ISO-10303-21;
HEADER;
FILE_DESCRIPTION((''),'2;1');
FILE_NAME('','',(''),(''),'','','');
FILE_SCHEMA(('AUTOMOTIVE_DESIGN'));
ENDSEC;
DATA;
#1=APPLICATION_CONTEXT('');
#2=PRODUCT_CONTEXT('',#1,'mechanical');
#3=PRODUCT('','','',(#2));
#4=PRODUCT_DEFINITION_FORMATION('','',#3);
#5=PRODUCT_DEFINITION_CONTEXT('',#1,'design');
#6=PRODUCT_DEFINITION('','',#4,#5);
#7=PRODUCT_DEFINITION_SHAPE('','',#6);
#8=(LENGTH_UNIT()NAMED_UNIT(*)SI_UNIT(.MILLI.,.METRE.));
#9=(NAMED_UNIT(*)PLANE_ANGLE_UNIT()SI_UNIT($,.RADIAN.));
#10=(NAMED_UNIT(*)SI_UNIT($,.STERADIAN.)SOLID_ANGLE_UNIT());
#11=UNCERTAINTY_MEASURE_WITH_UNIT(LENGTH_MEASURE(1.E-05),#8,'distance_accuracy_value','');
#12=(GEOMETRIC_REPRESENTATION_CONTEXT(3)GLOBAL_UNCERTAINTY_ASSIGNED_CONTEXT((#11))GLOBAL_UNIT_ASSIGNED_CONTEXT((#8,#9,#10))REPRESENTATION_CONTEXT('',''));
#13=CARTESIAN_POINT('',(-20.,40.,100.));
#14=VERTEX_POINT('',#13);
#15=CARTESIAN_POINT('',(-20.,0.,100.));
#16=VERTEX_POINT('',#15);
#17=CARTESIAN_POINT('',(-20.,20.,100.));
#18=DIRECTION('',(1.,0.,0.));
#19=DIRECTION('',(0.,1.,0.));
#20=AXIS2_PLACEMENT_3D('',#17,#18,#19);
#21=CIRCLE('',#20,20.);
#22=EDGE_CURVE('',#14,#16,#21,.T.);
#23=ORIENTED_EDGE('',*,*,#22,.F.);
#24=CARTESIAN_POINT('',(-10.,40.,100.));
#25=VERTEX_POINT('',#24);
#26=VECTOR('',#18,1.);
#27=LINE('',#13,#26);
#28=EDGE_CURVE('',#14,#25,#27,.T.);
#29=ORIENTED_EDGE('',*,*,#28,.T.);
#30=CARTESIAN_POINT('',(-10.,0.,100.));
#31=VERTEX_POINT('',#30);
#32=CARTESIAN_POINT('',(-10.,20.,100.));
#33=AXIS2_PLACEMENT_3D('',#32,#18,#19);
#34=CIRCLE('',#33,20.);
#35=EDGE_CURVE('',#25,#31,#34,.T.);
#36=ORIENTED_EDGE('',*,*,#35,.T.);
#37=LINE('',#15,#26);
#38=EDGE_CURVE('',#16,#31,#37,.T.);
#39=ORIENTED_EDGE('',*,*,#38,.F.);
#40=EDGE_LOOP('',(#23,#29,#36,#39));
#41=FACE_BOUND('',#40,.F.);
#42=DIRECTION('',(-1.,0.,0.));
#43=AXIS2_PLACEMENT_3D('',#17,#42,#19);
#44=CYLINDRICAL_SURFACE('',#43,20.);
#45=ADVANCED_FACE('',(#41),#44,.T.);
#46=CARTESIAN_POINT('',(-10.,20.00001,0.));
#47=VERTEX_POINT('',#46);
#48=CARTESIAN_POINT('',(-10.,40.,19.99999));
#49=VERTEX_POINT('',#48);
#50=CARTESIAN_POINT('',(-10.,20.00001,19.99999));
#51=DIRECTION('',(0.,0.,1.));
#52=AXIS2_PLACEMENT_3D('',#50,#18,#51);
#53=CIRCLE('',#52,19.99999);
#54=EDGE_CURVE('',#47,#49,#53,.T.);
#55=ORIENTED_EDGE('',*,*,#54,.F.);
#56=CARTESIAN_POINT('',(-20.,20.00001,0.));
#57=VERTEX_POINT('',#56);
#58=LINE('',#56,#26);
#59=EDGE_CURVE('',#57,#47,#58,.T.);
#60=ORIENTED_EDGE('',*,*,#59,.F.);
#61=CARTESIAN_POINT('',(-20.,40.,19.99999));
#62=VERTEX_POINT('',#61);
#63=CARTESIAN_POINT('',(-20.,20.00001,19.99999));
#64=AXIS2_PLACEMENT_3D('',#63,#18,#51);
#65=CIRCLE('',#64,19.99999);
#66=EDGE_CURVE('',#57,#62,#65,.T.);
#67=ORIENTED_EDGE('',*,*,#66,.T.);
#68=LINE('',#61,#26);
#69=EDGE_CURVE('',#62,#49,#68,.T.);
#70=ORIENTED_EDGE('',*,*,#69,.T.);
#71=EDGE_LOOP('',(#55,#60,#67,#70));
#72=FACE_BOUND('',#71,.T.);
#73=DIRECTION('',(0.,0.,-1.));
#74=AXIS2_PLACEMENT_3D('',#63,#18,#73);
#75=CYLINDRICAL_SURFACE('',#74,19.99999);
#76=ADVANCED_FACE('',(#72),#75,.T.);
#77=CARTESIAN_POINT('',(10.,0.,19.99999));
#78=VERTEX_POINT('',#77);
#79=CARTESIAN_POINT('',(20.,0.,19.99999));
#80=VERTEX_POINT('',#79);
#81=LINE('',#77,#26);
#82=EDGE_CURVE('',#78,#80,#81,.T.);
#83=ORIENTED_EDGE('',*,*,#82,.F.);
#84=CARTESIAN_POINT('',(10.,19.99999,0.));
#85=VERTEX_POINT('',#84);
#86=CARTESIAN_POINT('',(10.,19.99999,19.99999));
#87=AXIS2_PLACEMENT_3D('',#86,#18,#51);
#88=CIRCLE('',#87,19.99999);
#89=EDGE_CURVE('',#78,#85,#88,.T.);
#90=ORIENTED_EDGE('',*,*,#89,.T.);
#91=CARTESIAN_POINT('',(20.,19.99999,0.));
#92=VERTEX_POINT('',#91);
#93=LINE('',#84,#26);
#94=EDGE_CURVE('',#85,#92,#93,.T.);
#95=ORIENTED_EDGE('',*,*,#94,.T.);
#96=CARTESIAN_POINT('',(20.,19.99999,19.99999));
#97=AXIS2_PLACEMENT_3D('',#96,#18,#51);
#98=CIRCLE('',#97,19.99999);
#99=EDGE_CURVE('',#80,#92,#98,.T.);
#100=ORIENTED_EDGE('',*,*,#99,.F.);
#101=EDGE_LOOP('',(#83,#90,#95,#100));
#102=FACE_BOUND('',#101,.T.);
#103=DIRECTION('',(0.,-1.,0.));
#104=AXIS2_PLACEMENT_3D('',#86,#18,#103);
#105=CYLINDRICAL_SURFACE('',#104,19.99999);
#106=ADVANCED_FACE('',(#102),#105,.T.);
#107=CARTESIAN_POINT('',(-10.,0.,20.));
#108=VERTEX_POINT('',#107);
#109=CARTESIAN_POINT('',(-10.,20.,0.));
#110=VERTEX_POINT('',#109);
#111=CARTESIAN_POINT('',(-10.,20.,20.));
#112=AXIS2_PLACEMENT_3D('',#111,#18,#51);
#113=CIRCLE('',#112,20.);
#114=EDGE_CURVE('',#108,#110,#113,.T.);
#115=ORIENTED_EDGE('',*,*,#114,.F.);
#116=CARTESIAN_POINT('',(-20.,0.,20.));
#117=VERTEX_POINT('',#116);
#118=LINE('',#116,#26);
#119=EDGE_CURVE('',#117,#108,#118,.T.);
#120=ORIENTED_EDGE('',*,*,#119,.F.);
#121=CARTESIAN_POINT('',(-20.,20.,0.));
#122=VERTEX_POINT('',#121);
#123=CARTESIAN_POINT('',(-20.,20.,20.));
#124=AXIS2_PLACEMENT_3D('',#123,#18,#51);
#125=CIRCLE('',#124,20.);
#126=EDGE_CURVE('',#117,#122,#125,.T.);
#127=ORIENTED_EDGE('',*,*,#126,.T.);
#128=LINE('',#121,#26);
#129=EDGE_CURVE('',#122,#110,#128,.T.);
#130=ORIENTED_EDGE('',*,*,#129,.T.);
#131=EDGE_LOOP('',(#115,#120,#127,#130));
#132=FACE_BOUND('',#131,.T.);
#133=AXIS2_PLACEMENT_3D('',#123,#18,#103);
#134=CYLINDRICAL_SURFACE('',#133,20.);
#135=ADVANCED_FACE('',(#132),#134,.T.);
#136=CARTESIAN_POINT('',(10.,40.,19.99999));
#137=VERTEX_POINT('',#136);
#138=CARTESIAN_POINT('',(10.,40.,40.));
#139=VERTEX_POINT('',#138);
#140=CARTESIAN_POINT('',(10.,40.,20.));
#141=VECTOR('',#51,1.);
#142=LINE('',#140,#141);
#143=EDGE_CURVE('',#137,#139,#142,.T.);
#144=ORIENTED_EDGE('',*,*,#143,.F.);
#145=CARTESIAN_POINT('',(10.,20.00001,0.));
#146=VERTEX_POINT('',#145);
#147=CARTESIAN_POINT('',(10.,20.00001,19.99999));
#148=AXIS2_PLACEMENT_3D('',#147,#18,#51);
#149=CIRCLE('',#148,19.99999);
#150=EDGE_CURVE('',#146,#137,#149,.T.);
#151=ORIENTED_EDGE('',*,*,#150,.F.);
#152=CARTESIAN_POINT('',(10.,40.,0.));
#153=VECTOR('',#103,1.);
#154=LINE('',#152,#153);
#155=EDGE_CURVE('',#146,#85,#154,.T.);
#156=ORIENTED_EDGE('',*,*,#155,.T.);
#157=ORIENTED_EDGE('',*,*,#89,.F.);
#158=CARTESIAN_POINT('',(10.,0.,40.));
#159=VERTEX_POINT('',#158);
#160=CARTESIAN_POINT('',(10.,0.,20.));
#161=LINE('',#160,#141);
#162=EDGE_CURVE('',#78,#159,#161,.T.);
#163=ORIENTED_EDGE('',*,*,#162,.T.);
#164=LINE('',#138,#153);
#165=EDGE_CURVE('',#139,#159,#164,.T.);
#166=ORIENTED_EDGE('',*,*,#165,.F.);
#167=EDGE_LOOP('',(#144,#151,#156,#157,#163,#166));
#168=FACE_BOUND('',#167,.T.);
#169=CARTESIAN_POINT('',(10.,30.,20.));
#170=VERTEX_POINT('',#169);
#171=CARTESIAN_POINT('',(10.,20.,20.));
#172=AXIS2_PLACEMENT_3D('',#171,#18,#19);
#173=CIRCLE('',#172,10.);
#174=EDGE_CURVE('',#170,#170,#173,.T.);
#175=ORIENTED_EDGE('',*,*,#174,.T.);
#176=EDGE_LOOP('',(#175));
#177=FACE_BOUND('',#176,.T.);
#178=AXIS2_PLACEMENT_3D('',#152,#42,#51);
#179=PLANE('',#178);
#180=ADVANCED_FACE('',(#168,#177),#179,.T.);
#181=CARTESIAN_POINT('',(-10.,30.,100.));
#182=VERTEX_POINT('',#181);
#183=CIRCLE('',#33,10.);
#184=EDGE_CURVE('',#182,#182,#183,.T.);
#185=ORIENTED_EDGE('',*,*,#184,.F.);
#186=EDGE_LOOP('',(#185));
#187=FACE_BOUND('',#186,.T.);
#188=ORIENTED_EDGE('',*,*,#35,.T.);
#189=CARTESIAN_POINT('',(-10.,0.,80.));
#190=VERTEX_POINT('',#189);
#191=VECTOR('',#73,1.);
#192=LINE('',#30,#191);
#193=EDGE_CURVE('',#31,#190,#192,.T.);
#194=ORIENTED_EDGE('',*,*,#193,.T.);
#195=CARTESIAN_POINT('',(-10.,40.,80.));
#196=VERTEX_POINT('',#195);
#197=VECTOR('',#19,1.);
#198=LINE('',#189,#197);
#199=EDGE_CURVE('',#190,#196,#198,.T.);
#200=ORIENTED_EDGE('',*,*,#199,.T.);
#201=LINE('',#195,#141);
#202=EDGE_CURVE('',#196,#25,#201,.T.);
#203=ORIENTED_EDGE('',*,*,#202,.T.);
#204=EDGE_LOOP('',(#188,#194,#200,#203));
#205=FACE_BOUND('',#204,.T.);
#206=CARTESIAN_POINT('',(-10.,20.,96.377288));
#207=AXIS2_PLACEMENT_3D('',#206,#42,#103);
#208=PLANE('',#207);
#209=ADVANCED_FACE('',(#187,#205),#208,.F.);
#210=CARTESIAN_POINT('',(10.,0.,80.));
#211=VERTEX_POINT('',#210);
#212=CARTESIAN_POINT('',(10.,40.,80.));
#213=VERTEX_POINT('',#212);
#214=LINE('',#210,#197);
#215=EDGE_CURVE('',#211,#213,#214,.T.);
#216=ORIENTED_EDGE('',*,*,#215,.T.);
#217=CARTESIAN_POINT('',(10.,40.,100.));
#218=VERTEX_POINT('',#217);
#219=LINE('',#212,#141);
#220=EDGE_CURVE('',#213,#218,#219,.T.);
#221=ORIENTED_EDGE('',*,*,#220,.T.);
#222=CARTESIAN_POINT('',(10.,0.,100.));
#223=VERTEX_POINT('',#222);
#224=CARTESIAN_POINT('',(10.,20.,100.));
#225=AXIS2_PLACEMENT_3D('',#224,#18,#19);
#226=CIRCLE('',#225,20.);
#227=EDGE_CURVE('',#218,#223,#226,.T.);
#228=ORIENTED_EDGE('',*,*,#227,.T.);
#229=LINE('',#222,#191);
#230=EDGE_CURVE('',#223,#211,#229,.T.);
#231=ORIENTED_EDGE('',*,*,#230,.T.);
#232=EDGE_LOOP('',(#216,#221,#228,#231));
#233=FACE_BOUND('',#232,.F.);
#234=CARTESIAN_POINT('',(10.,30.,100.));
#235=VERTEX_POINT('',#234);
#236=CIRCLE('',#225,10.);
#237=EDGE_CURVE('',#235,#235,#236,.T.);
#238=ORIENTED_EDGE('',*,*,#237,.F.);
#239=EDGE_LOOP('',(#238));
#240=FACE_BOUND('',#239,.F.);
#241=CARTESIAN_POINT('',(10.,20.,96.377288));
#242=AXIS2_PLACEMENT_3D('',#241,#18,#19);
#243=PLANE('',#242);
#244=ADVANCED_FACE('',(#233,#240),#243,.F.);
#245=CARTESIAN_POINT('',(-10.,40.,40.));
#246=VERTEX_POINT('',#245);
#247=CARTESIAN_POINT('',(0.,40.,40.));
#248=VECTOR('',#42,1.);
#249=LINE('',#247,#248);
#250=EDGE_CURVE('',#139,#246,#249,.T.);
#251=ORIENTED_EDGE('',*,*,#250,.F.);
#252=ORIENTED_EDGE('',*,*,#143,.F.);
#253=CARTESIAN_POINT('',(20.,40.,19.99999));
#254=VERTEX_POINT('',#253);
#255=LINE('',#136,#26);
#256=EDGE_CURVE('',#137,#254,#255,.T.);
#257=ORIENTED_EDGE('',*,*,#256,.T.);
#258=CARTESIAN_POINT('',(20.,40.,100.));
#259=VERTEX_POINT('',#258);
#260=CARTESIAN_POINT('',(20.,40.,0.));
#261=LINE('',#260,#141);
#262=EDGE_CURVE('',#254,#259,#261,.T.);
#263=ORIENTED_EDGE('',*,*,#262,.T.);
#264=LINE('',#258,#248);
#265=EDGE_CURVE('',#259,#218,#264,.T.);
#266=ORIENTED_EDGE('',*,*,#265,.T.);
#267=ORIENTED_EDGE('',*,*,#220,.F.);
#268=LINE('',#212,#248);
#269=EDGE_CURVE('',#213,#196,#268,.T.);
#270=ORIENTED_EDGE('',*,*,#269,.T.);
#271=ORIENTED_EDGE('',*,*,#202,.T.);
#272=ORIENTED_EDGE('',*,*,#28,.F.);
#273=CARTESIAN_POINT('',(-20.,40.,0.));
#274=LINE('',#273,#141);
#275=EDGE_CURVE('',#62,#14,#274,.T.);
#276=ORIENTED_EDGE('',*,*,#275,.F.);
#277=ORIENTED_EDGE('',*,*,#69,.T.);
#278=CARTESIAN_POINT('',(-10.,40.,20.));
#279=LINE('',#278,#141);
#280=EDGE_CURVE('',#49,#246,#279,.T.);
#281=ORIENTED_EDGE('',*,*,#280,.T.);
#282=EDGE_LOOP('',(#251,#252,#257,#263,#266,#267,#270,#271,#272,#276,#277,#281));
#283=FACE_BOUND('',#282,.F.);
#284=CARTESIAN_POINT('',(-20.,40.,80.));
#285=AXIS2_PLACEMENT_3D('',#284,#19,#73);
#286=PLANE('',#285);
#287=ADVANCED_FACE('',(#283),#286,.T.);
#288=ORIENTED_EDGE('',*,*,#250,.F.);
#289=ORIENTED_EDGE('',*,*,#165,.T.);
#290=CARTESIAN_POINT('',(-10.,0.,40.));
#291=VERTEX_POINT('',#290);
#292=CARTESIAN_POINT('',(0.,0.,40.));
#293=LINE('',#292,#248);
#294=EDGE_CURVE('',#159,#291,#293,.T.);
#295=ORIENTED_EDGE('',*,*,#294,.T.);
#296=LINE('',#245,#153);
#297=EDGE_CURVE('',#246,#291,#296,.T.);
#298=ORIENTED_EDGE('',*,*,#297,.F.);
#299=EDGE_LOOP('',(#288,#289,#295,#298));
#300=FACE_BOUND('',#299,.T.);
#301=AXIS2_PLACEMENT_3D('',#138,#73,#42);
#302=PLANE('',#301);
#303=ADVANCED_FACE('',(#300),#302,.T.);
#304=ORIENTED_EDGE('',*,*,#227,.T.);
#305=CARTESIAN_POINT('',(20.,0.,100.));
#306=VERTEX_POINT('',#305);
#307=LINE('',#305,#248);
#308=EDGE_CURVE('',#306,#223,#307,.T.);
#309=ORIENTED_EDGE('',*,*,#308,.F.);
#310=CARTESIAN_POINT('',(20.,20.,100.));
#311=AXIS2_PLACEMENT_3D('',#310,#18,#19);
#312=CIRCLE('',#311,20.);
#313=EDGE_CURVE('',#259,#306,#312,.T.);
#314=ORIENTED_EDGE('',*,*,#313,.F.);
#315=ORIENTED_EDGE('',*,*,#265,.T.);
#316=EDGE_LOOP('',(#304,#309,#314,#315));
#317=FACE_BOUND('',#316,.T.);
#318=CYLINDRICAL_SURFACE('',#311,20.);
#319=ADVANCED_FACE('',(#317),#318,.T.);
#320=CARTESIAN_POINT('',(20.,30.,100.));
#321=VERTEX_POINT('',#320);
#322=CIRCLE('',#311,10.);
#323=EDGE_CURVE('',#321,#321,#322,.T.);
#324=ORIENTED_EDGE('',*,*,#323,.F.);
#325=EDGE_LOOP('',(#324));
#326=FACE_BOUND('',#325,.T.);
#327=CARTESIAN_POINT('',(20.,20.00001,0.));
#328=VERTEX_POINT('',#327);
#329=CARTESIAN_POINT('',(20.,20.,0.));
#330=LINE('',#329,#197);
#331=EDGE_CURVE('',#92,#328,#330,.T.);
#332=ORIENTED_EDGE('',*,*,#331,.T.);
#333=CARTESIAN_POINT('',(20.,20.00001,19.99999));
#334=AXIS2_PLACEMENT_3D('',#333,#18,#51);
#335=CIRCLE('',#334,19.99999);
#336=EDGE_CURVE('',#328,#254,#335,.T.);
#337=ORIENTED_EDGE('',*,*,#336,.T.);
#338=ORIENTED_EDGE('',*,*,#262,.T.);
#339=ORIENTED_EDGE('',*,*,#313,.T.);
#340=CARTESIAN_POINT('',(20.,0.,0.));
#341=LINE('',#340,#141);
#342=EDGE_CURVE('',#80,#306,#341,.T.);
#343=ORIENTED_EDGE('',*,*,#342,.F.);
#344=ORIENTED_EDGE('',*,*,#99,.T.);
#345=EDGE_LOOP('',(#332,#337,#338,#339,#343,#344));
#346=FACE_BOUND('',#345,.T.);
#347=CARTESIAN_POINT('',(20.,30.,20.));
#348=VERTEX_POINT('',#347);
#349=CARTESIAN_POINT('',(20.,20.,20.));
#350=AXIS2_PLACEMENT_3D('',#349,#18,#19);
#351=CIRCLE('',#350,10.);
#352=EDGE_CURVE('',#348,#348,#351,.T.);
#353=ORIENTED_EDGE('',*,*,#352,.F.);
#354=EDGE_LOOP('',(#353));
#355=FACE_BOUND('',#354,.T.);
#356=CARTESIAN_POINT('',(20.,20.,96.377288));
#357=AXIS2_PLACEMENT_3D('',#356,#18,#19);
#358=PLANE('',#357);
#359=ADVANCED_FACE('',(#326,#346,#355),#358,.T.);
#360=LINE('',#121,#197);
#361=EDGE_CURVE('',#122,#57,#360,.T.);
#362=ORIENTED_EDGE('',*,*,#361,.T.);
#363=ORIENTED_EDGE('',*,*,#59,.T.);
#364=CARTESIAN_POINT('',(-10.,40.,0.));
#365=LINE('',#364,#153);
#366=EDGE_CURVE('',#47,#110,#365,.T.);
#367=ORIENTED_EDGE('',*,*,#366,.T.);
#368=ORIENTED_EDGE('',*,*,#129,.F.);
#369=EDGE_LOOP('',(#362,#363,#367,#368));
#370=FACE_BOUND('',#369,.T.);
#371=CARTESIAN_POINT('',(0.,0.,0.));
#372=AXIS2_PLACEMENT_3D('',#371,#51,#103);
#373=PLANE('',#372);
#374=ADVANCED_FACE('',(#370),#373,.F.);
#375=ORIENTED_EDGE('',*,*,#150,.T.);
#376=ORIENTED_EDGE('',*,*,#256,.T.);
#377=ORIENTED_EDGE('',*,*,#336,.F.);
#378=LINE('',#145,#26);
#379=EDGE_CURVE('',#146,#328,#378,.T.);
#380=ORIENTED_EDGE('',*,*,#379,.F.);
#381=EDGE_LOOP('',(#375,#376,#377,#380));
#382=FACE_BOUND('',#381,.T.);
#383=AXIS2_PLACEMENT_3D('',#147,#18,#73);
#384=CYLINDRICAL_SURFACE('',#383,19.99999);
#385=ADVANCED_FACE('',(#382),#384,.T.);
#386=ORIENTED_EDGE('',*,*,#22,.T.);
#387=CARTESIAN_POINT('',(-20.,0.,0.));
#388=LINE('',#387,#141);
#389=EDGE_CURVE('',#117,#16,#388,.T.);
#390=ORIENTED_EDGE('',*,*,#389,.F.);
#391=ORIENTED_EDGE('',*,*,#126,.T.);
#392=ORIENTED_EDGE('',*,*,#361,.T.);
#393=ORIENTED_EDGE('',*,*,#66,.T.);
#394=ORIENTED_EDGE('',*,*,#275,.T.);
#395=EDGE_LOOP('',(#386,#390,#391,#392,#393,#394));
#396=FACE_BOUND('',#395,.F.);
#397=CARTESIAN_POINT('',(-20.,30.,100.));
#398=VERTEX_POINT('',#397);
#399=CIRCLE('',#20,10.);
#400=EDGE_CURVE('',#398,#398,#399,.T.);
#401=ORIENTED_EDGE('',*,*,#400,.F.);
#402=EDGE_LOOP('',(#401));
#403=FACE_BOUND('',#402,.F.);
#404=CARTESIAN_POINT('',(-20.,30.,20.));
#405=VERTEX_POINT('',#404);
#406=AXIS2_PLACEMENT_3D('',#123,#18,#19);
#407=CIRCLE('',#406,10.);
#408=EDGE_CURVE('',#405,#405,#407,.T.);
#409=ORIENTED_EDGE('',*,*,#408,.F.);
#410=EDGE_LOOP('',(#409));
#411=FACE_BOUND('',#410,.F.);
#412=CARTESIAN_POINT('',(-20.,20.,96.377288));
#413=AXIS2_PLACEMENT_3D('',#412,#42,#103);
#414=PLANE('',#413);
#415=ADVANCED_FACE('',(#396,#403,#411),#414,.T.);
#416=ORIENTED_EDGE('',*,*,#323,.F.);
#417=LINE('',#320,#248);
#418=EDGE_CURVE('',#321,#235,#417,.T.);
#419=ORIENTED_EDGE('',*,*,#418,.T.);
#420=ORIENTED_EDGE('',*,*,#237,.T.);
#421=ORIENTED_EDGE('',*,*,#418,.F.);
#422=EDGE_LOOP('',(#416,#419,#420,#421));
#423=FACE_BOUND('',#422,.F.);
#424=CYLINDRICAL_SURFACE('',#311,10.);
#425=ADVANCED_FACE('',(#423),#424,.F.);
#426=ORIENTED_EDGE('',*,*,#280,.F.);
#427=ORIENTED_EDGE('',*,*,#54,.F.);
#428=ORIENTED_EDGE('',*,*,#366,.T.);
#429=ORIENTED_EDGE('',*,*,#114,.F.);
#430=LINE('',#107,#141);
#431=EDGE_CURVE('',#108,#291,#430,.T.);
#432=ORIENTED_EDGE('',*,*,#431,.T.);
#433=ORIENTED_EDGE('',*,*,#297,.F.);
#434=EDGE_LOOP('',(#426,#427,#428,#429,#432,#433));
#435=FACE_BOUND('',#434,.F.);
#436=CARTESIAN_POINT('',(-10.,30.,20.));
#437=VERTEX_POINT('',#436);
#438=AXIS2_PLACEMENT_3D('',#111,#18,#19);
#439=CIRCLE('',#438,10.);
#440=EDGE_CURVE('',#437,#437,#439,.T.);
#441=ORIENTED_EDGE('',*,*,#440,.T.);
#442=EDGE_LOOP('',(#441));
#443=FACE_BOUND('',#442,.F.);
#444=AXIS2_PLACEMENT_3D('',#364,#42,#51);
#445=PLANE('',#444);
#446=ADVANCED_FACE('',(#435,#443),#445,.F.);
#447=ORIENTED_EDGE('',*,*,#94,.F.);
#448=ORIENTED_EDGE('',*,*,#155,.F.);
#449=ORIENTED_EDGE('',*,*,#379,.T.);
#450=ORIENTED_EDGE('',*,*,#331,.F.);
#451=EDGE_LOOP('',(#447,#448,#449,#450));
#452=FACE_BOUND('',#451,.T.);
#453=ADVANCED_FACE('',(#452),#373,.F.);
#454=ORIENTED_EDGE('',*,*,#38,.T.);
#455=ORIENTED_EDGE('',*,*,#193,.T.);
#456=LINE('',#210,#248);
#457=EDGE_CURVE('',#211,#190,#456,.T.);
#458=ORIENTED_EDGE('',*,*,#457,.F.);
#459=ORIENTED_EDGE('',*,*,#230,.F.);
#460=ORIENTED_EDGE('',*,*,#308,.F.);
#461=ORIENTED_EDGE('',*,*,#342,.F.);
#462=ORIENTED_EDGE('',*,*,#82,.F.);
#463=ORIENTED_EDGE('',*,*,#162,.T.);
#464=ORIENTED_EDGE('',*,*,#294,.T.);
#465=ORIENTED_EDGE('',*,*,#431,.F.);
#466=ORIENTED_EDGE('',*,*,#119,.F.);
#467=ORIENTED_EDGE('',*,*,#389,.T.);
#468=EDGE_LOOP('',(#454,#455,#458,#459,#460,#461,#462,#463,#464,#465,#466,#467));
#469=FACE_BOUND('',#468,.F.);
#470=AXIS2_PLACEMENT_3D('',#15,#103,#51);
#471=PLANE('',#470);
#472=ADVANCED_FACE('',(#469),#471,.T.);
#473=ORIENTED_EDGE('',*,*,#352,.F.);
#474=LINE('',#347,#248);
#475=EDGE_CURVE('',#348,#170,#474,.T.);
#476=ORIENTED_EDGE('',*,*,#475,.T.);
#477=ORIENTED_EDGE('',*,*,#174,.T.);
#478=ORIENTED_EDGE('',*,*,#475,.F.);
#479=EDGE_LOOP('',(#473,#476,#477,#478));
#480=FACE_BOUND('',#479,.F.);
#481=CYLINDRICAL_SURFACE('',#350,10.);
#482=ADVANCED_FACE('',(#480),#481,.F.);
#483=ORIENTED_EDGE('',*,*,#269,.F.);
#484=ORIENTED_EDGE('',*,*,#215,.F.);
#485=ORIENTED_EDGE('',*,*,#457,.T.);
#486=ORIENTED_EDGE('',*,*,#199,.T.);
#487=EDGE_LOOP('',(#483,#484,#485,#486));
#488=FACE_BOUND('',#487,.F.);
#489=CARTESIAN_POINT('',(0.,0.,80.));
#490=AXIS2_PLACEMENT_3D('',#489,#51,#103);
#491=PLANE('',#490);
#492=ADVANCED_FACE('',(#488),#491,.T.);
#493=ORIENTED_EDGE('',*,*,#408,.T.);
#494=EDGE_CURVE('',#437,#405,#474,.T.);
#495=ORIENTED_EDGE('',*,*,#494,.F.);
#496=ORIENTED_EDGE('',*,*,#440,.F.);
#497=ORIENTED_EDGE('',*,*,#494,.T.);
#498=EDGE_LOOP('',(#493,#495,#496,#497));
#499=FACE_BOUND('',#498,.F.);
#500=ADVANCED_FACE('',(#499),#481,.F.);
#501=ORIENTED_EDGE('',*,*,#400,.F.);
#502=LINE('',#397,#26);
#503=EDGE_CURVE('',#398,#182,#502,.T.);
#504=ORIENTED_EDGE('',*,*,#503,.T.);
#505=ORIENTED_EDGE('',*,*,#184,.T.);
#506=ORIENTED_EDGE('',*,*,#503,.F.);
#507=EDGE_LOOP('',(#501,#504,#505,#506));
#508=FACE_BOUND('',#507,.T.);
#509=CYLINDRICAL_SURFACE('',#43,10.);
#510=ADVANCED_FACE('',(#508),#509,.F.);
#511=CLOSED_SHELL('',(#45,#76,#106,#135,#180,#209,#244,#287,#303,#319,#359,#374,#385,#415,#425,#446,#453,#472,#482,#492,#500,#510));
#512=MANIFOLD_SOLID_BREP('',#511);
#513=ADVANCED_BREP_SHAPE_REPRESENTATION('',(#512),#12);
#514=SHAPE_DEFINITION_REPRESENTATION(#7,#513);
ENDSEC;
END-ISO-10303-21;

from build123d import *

# Parameters (mm, degrees)
F0_W     = 40
F0_H     = 80
F1_DEPTH = 20
F2_R     = 10
F3_DEPTH = 10
F5_W     = 20
F5_H     = 40
F6_DEPTH = 40
F7_R     = 10
F8_DEPTH = 40
F9_R     = 20
F10_R    = 19.99999


# Not quite as in the source:
# - a fillet or chamfer is up to 0.001 mm smaller than in the source, because OpenCascade refuses the exact size


with BuildPart() as f1:
    # F0 (on Right) → F1 (new body)
    with BuildSketch(Plane.YZ):
        with Locations((20, 40)):
            Rectangle(F0_W, F0_H)
    extrude(amount=F1_DEPTH)

    # F2 (on face) → F3 (join)
    with BuildSketch(Plane.YZ.offset(20)):
        with BuildLine():
            Line((0, 100), (0, 80))
            Line((0, 80), (40, 80))
            Line((40, 80), (40, 100))
            ThreePointArc((40, 100), (20, 120), (0, 100))
        make_face()
        with Locations((20, 100)):
            Circle(F2_R, mode=Mode.SUBTRACT)
    extrude(amount=-F3_DEPTH)

    # F4: F1 across face


with BuildPart() as f1_1:
    add(f1.part)
    add(f1.part.mirror(Plane(origin=(0, 20, 40), x_dir=(0, 1, 0), z_dir=(-1, 0, 0))))

    # F5 (on face) → F6 (cut, through all)
    with BuildSketch(Plane(origin=(0, 40, 0), x_dir=(-1, 0, 0), z_dir=(0, 1, 0))):
        with Locations((0, 20)):
            Rectangle(F5_W, F5_H)
    extrude(amount=-F6_DEPTH, mode=Mode.SUBTRACT)

    # F7 (on face) → F8 (cut, through all)
    with BuildSketch(Plane.YZ.offset(20)):
        with Locations((20, 20)):
            Circle(F7_R)
    extrude(amount=-F8_DEPTH, mode=Mode.SUBTRACT)

    # F9
    f9_edges = [f1_1.edges().sort_by_distance(p)[0] for p in [
        (-15, 0, 0),
    ]]
    fillet(f9_edges, radius=F9_R)

    # F10 (radius 20 in the source; OpenCascade refuses exactly that, so slightly less here)
    f10_edges = [f1_1.edges().sort_by_distance(p)[0] for p in [
        (-15, 40, 0),
        (15, 40, 0),
        (15, 0, 0),
    ]]
    fillet(f10_edges, radius=F10_R)


solid = f1_1.part
